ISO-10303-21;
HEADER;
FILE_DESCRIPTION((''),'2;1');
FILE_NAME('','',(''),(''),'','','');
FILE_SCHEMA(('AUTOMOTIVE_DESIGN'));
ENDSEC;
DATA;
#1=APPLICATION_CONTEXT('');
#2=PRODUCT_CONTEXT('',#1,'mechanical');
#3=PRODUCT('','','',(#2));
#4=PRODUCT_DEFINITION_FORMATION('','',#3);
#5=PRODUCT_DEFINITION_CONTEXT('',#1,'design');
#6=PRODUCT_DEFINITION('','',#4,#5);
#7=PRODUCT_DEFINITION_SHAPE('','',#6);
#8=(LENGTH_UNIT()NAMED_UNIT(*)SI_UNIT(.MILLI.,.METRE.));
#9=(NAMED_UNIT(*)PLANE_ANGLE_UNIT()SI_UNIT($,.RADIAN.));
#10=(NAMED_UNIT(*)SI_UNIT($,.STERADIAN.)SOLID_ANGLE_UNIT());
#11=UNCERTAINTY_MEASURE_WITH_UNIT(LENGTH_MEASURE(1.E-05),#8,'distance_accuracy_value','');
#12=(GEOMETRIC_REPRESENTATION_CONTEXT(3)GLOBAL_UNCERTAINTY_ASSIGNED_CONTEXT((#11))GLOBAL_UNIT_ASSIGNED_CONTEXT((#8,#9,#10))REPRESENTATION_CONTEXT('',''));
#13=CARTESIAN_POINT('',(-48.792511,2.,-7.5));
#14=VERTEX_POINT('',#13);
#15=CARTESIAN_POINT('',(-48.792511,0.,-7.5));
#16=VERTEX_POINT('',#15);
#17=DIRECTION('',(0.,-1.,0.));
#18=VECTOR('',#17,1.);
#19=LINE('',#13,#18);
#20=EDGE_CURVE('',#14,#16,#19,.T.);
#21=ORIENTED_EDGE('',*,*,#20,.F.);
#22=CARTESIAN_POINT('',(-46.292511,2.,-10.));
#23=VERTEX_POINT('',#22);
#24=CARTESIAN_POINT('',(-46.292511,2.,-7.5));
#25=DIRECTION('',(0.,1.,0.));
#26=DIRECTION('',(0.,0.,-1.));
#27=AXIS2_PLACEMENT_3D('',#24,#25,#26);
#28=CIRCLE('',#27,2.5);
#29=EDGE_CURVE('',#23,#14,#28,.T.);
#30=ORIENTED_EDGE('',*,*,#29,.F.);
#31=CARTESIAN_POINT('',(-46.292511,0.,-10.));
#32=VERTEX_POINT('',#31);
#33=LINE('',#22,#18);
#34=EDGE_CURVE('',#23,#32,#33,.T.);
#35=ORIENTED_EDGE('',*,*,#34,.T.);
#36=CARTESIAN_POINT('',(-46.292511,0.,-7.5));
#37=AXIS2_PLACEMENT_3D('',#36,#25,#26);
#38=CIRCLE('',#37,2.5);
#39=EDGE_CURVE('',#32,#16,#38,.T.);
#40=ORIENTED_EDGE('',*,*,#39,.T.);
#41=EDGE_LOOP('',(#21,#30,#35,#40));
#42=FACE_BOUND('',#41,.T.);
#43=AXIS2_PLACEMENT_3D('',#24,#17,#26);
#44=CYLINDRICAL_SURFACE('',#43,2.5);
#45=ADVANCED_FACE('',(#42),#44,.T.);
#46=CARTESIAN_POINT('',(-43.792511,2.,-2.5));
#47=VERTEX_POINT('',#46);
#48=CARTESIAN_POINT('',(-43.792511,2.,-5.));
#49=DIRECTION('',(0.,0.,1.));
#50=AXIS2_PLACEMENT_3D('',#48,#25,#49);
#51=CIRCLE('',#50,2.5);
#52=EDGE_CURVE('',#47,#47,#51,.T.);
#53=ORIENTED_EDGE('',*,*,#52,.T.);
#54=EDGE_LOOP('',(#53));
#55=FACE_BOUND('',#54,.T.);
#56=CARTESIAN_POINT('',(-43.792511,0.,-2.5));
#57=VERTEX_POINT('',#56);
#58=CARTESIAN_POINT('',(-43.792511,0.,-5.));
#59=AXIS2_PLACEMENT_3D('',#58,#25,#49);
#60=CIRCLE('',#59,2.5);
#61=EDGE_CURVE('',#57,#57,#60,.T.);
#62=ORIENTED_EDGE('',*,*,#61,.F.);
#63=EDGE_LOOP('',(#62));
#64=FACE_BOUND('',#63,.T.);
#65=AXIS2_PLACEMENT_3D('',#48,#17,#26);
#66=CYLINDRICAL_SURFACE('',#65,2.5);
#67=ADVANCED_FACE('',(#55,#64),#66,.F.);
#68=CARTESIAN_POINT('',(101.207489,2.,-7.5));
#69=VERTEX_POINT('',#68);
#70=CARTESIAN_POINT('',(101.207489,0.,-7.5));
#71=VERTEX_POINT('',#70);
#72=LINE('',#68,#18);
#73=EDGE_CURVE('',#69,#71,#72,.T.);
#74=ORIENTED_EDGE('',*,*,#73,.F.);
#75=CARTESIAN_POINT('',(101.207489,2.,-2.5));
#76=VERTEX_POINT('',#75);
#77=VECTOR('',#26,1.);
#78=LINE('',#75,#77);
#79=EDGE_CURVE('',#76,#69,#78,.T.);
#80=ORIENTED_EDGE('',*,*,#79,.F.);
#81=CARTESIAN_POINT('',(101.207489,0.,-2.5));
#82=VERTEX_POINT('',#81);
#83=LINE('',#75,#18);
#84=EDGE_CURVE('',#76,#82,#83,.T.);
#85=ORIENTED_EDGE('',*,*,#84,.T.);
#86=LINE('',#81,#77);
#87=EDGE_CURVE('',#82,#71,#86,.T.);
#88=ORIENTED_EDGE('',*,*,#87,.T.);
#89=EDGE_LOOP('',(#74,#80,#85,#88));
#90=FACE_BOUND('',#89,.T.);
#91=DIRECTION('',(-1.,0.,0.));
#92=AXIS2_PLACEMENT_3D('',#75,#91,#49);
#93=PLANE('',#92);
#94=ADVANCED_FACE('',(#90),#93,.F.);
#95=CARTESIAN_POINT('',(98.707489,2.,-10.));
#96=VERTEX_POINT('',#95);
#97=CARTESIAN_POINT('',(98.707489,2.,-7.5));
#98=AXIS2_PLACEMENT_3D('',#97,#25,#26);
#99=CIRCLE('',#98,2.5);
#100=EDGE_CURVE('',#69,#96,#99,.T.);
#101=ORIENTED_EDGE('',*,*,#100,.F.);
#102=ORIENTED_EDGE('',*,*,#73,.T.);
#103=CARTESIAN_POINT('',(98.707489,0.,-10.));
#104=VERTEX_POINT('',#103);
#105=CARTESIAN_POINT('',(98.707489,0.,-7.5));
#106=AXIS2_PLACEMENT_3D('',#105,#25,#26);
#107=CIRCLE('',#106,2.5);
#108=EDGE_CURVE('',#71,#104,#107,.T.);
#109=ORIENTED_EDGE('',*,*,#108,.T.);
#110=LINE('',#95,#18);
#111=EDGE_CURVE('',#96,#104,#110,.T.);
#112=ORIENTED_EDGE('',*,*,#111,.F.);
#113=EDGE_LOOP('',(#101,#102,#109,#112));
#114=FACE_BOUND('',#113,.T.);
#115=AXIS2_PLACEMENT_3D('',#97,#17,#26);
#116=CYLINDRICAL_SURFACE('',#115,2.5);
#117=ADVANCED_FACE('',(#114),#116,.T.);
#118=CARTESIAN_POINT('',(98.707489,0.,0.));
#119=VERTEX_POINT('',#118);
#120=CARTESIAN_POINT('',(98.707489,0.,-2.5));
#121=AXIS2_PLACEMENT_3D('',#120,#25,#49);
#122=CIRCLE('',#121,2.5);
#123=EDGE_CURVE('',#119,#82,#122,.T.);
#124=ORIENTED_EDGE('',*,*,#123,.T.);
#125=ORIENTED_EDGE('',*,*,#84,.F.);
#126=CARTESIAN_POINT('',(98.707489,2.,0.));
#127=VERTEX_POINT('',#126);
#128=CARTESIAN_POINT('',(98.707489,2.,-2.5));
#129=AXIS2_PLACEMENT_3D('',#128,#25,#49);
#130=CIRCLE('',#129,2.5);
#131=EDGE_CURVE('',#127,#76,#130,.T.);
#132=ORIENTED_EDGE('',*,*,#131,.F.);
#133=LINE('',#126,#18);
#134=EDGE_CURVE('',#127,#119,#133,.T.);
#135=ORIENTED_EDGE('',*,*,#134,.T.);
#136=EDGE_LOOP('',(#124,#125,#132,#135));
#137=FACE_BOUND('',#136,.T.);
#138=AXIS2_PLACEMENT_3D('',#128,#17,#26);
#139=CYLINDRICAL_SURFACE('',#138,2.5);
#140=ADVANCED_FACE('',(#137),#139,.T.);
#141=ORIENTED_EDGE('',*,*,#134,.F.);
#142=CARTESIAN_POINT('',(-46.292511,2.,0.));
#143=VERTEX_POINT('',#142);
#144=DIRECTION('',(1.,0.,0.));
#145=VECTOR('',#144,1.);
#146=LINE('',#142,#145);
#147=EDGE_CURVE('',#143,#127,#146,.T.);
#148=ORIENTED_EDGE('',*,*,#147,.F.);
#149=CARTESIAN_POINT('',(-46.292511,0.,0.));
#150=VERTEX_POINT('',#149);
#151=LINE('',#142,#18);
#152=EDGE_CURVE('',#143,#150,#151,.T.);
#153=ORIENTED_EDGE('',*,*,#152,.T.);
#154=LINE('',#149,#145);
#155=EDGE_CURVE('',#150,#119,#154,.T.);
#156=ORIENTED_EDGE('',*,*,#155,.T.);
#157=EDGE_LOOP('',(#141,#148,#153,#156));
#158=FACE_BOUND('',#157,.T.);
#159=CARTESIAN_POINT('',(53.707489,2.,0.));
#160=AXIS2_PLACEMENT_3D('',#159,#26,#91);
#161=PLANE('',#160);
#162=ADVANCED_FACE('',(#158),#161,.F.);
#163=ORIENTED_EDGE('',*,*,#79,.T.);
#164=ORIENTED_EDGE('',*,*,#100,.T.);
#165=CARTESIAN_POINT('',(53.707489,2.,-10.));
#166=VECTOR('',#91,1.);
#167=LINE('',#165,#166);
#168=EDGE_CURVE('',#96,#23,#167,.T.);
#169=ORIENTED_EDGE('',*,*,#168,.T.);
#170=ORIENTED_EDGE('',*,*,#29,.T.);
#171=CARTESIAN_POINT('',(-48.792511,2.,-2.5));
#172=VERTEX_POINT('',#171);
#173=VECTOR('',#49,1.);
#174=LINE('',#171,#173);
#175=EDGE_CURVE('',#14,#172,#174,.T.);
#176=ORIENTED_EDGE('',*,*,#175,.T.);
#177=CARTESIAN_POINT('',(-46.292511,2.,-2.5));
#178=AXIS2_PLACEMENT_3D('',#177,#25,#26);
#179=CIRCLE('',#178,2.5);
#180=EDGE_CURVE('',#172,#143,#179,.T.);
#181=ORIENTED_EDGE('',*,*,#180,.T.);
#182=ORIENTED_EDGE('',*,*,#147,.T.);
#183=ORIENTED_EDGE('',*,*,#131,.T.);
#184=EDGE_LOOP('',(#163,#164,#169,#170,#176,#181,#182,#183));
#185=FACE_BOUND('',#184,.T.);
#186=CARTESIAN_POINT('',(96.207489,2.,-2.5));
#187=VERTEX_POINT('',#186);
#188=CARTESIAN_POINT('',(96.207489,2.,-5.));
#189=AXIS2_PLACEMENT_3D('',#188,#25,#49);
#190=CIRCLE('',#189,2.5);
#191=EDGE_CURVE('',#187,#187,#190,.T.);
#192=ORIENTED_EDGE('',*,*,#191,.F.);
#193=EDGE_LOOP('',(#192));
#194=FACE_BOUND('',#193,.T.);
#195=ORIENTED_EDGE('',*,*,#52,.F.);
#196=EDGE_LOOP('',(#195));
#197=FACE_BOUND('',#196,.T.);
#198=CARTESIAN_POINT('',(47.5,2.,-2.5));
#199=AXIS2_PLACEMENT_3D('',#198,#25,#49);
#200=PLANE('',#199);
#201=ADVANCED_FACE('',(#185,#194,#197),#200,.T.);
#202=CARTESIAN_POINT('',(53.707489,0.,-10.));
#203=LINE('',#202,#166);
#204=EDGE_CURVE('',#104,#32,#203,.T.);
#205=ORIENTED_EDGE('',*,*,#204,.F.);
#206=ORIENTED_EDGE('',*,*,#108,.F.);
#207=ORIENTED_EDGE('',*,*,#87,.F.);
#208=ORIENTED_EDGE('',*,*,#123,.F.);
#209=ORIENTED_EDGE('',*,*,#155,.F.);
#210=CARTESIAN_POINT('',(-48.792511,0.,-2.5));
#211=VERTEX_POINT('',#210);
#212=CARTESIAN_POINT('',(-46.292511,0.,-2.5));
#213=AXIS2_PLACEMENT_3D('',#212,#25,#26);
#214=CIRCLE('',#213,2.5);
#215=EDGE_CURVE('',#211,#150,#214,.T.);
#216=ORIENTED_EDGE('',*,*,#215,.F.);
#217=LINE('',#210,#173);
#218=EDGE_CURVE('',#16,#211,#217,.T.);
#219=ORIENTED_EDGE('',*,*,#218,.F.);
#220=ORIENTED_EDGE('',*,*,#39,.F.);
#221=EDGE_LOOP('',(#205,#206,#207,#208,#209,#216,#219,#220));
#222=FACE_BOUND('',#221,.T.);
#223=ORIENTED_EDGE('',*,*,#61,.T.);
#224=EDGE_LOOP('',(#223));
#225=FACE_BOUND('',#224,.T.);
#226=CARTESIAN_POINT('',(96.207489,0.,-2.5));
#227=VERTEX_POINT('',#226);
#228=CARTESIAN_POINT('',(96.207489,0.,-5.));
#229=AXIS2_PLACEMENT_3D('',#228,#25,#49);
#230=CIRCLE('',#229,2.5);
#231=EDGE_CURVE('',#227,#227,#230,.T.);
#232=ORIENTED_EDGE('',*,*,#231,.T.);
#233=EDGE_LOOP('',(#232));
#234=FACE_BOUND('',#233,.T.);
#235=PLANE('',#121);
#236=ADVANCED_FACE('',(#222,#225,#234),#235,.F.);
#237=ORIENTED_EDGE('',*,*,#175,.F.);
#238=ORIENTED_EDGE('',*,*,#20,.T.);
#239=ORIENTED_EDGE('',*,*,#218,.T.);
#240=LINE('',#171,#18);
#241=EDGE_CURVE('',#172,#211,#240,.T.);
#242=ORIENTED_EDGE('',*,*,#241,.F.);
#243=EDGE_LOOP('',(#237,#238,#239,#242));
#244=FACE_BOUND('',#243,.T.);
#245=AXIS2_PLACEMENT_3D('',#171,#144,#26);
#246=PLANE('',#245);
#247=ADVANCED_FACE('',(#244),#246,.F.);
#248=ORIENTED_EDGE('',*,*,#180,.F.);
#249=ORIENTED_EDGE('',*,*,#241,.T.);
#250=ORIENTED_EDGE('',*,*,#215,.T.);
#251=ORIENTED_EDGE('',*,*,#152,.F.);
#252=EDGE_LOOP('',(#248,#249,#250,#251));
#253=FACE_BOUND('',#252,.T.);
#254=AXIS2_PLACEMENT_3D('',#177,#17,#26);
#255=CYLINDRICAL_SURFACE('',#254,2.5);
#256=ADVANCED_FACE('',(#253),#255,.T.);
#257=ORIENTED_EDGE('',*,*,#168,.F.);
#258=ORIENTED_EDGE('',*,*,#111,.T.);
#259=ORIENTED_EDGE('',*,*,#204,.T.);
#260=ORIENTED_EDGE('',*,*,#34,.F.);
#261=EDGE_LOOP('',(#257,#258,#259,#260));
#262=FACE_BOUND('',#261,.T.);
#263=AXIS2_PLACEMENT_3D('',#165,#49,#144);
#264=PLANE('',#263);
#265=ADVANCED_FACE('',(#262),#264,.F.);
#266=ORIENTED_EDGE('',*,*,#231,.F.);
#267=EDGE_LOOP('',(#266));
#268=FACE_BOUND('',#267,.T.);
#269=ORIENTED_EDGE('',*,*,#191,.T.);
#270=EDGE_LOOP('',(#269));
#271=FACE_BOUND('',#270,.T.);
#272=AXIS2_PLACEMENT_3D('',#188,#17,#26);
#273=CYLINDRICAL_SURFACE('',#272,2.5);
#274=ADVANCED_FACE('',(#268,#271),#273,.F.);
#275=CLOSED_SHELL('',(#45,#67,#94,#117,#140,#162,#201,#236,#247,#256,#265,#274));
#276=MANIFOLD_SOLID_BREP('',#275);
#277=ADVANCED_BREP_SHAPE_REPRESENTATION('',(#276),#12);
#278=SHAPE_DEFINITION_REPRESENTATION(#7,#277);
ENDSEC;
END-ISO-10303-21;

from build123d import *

# Parameters (mm, degrees)
SKETCH1_R           = 2.5
BOSS_EXTRUDE2_DEPTH = 2
FLEX1_OUTLINE_R     = 2.5
FLEX1_DEPTH         = 2


# Read off the part's stored shape, not the designer's step: Flex1
with BuildPart() as part:
    # Sketch1 → Boss-Extrude2 (new body)
    with BuildSketch(Plane(origin=(0, 0, 0), x_dir=(1, 0, 0), z_dir=(0, 1, 0))):
        with BuildLine():
            Line((2.5, 0), (47.5, 0))
            ThreePointArc((47.5, 0), (49.267766953, 0.732233047), (50, 2.5))
            Line((50, 2.5), (50, 7.5))
            ThreePointArc((50, 7.5), (49.267766953, 9.267766953), (47.5, 10))
            Line((47.5, 10), (2.5, 10))
            ThreePointArc((2.5, 10), (0.732233047, 9.267766953), (0, 7.5))
            Line((0, 7.5), (0, 2.5))
            ThreePointArc((0, 2.5), (0.732233047, 0.732233047), (2.5, 0))
        make_face()
        with Locations(Location((5, 5, 0), (0, 0, 270))):
            Circle(SKETCH1_R, mode=Mode.SUBTRACT)
        with Locations(Location((45, 5, 0), (0, 0, 270))):
            Circle(SKETCH1_R, mode=Mode.SUBTRACT)
    extrude(amount=BOSS_EXTRUDE2_DEPTH)

    # Flex1 outline → Flex1 (add)
    # profile 1 of 4: a face of its own
    with BuildSketch(Plane(origin=(0, 0, 0), x_dir=(1, 0, 0), z_dir=(0, 1, 0))):
        with BuildLine():
            Line((2.5, 10), (-46.292510667, 10))
            ThreePointArc((-46.292510667, 10), (-48.06027762, 9.267766953), (-48.792510667, 7.5))
            Line((-48.792510667, 7.5), (-48.792510667, 2.5))
            ThreePointArc((-48.792510667, 2.5), (-48.06027762, 0.732233047), (-46.292510667, 0))
            Line((-46.292510667, 0), (2.5, 0))
            ThreePointArc((2.5, 0), (0.732233047, 0.732233047), (0, 2.5))
            Line((0, 2.5), (0, 7.5))
            ThreePointArc((0, 7.5), (0.732233047, 9.267766953), (2.5, 10))
        make_face()
        with Locations((-43.792510667, 5)):
            Circle(FLEX1_OUTLINE_R, mode=Mode.SUBTRACT)
    # profile 2 of 4: a face of its own
    with BuildSketch(Plane(origin=(0, 0, 0), x_dir=(1, 0, 0), z_dir=(0, 1, 0))):
        with BuildLine():
            Line((98.707489333, 10), (47.5, 10))
            ThreePointArc((47.5, 10), (49.267766953, 9.267766953), (50, 7.5))
            Line((50, 7.5), (50, 2.5))
            ThreePointArc((50, 2.5), (49.267766953, 0.732233047), (47.5, 0))
            Line((47.5, 0), (98.707489333, 0))
            ThreePointArc((98.707489333, 0), (100.475256286, 0.732233047), (101.207489333, 2.5))
            Line((101.207489333, 2.5), (101.207489333, 7.5))
            ThreePointArc((101.207489333, 7.5), (100.475256286, 9.267766953), (98.707489333, 10))
        make_face()
        with Locations((96.207489333, 5)):
            Circle(FLEX1_OUTLINE_R, mode=Mode.SUBTRACT)
    # profile 3 of 4: a face of its own
    with BuildSketch(Plane(origin=(0, 0, 0), x_dir=(1, 0, 0), z_dir=(0, 1, 0))):
        with Locations((5, 5)):
            Circle(FLEX1_OUTLINE_R)
    # profile 4 of 4: a face of its own
    with BuildSketch(Plane(origin=(0, 0, 0), x_dir=(1, 0, 0), z_dir=(0, 1, 0))):
        with Locations((45, 5)):
            Circle(FLEX1_OUTLINE_R)
    extrude(amount=FLEX1_DEPTH)


solid = part.part
